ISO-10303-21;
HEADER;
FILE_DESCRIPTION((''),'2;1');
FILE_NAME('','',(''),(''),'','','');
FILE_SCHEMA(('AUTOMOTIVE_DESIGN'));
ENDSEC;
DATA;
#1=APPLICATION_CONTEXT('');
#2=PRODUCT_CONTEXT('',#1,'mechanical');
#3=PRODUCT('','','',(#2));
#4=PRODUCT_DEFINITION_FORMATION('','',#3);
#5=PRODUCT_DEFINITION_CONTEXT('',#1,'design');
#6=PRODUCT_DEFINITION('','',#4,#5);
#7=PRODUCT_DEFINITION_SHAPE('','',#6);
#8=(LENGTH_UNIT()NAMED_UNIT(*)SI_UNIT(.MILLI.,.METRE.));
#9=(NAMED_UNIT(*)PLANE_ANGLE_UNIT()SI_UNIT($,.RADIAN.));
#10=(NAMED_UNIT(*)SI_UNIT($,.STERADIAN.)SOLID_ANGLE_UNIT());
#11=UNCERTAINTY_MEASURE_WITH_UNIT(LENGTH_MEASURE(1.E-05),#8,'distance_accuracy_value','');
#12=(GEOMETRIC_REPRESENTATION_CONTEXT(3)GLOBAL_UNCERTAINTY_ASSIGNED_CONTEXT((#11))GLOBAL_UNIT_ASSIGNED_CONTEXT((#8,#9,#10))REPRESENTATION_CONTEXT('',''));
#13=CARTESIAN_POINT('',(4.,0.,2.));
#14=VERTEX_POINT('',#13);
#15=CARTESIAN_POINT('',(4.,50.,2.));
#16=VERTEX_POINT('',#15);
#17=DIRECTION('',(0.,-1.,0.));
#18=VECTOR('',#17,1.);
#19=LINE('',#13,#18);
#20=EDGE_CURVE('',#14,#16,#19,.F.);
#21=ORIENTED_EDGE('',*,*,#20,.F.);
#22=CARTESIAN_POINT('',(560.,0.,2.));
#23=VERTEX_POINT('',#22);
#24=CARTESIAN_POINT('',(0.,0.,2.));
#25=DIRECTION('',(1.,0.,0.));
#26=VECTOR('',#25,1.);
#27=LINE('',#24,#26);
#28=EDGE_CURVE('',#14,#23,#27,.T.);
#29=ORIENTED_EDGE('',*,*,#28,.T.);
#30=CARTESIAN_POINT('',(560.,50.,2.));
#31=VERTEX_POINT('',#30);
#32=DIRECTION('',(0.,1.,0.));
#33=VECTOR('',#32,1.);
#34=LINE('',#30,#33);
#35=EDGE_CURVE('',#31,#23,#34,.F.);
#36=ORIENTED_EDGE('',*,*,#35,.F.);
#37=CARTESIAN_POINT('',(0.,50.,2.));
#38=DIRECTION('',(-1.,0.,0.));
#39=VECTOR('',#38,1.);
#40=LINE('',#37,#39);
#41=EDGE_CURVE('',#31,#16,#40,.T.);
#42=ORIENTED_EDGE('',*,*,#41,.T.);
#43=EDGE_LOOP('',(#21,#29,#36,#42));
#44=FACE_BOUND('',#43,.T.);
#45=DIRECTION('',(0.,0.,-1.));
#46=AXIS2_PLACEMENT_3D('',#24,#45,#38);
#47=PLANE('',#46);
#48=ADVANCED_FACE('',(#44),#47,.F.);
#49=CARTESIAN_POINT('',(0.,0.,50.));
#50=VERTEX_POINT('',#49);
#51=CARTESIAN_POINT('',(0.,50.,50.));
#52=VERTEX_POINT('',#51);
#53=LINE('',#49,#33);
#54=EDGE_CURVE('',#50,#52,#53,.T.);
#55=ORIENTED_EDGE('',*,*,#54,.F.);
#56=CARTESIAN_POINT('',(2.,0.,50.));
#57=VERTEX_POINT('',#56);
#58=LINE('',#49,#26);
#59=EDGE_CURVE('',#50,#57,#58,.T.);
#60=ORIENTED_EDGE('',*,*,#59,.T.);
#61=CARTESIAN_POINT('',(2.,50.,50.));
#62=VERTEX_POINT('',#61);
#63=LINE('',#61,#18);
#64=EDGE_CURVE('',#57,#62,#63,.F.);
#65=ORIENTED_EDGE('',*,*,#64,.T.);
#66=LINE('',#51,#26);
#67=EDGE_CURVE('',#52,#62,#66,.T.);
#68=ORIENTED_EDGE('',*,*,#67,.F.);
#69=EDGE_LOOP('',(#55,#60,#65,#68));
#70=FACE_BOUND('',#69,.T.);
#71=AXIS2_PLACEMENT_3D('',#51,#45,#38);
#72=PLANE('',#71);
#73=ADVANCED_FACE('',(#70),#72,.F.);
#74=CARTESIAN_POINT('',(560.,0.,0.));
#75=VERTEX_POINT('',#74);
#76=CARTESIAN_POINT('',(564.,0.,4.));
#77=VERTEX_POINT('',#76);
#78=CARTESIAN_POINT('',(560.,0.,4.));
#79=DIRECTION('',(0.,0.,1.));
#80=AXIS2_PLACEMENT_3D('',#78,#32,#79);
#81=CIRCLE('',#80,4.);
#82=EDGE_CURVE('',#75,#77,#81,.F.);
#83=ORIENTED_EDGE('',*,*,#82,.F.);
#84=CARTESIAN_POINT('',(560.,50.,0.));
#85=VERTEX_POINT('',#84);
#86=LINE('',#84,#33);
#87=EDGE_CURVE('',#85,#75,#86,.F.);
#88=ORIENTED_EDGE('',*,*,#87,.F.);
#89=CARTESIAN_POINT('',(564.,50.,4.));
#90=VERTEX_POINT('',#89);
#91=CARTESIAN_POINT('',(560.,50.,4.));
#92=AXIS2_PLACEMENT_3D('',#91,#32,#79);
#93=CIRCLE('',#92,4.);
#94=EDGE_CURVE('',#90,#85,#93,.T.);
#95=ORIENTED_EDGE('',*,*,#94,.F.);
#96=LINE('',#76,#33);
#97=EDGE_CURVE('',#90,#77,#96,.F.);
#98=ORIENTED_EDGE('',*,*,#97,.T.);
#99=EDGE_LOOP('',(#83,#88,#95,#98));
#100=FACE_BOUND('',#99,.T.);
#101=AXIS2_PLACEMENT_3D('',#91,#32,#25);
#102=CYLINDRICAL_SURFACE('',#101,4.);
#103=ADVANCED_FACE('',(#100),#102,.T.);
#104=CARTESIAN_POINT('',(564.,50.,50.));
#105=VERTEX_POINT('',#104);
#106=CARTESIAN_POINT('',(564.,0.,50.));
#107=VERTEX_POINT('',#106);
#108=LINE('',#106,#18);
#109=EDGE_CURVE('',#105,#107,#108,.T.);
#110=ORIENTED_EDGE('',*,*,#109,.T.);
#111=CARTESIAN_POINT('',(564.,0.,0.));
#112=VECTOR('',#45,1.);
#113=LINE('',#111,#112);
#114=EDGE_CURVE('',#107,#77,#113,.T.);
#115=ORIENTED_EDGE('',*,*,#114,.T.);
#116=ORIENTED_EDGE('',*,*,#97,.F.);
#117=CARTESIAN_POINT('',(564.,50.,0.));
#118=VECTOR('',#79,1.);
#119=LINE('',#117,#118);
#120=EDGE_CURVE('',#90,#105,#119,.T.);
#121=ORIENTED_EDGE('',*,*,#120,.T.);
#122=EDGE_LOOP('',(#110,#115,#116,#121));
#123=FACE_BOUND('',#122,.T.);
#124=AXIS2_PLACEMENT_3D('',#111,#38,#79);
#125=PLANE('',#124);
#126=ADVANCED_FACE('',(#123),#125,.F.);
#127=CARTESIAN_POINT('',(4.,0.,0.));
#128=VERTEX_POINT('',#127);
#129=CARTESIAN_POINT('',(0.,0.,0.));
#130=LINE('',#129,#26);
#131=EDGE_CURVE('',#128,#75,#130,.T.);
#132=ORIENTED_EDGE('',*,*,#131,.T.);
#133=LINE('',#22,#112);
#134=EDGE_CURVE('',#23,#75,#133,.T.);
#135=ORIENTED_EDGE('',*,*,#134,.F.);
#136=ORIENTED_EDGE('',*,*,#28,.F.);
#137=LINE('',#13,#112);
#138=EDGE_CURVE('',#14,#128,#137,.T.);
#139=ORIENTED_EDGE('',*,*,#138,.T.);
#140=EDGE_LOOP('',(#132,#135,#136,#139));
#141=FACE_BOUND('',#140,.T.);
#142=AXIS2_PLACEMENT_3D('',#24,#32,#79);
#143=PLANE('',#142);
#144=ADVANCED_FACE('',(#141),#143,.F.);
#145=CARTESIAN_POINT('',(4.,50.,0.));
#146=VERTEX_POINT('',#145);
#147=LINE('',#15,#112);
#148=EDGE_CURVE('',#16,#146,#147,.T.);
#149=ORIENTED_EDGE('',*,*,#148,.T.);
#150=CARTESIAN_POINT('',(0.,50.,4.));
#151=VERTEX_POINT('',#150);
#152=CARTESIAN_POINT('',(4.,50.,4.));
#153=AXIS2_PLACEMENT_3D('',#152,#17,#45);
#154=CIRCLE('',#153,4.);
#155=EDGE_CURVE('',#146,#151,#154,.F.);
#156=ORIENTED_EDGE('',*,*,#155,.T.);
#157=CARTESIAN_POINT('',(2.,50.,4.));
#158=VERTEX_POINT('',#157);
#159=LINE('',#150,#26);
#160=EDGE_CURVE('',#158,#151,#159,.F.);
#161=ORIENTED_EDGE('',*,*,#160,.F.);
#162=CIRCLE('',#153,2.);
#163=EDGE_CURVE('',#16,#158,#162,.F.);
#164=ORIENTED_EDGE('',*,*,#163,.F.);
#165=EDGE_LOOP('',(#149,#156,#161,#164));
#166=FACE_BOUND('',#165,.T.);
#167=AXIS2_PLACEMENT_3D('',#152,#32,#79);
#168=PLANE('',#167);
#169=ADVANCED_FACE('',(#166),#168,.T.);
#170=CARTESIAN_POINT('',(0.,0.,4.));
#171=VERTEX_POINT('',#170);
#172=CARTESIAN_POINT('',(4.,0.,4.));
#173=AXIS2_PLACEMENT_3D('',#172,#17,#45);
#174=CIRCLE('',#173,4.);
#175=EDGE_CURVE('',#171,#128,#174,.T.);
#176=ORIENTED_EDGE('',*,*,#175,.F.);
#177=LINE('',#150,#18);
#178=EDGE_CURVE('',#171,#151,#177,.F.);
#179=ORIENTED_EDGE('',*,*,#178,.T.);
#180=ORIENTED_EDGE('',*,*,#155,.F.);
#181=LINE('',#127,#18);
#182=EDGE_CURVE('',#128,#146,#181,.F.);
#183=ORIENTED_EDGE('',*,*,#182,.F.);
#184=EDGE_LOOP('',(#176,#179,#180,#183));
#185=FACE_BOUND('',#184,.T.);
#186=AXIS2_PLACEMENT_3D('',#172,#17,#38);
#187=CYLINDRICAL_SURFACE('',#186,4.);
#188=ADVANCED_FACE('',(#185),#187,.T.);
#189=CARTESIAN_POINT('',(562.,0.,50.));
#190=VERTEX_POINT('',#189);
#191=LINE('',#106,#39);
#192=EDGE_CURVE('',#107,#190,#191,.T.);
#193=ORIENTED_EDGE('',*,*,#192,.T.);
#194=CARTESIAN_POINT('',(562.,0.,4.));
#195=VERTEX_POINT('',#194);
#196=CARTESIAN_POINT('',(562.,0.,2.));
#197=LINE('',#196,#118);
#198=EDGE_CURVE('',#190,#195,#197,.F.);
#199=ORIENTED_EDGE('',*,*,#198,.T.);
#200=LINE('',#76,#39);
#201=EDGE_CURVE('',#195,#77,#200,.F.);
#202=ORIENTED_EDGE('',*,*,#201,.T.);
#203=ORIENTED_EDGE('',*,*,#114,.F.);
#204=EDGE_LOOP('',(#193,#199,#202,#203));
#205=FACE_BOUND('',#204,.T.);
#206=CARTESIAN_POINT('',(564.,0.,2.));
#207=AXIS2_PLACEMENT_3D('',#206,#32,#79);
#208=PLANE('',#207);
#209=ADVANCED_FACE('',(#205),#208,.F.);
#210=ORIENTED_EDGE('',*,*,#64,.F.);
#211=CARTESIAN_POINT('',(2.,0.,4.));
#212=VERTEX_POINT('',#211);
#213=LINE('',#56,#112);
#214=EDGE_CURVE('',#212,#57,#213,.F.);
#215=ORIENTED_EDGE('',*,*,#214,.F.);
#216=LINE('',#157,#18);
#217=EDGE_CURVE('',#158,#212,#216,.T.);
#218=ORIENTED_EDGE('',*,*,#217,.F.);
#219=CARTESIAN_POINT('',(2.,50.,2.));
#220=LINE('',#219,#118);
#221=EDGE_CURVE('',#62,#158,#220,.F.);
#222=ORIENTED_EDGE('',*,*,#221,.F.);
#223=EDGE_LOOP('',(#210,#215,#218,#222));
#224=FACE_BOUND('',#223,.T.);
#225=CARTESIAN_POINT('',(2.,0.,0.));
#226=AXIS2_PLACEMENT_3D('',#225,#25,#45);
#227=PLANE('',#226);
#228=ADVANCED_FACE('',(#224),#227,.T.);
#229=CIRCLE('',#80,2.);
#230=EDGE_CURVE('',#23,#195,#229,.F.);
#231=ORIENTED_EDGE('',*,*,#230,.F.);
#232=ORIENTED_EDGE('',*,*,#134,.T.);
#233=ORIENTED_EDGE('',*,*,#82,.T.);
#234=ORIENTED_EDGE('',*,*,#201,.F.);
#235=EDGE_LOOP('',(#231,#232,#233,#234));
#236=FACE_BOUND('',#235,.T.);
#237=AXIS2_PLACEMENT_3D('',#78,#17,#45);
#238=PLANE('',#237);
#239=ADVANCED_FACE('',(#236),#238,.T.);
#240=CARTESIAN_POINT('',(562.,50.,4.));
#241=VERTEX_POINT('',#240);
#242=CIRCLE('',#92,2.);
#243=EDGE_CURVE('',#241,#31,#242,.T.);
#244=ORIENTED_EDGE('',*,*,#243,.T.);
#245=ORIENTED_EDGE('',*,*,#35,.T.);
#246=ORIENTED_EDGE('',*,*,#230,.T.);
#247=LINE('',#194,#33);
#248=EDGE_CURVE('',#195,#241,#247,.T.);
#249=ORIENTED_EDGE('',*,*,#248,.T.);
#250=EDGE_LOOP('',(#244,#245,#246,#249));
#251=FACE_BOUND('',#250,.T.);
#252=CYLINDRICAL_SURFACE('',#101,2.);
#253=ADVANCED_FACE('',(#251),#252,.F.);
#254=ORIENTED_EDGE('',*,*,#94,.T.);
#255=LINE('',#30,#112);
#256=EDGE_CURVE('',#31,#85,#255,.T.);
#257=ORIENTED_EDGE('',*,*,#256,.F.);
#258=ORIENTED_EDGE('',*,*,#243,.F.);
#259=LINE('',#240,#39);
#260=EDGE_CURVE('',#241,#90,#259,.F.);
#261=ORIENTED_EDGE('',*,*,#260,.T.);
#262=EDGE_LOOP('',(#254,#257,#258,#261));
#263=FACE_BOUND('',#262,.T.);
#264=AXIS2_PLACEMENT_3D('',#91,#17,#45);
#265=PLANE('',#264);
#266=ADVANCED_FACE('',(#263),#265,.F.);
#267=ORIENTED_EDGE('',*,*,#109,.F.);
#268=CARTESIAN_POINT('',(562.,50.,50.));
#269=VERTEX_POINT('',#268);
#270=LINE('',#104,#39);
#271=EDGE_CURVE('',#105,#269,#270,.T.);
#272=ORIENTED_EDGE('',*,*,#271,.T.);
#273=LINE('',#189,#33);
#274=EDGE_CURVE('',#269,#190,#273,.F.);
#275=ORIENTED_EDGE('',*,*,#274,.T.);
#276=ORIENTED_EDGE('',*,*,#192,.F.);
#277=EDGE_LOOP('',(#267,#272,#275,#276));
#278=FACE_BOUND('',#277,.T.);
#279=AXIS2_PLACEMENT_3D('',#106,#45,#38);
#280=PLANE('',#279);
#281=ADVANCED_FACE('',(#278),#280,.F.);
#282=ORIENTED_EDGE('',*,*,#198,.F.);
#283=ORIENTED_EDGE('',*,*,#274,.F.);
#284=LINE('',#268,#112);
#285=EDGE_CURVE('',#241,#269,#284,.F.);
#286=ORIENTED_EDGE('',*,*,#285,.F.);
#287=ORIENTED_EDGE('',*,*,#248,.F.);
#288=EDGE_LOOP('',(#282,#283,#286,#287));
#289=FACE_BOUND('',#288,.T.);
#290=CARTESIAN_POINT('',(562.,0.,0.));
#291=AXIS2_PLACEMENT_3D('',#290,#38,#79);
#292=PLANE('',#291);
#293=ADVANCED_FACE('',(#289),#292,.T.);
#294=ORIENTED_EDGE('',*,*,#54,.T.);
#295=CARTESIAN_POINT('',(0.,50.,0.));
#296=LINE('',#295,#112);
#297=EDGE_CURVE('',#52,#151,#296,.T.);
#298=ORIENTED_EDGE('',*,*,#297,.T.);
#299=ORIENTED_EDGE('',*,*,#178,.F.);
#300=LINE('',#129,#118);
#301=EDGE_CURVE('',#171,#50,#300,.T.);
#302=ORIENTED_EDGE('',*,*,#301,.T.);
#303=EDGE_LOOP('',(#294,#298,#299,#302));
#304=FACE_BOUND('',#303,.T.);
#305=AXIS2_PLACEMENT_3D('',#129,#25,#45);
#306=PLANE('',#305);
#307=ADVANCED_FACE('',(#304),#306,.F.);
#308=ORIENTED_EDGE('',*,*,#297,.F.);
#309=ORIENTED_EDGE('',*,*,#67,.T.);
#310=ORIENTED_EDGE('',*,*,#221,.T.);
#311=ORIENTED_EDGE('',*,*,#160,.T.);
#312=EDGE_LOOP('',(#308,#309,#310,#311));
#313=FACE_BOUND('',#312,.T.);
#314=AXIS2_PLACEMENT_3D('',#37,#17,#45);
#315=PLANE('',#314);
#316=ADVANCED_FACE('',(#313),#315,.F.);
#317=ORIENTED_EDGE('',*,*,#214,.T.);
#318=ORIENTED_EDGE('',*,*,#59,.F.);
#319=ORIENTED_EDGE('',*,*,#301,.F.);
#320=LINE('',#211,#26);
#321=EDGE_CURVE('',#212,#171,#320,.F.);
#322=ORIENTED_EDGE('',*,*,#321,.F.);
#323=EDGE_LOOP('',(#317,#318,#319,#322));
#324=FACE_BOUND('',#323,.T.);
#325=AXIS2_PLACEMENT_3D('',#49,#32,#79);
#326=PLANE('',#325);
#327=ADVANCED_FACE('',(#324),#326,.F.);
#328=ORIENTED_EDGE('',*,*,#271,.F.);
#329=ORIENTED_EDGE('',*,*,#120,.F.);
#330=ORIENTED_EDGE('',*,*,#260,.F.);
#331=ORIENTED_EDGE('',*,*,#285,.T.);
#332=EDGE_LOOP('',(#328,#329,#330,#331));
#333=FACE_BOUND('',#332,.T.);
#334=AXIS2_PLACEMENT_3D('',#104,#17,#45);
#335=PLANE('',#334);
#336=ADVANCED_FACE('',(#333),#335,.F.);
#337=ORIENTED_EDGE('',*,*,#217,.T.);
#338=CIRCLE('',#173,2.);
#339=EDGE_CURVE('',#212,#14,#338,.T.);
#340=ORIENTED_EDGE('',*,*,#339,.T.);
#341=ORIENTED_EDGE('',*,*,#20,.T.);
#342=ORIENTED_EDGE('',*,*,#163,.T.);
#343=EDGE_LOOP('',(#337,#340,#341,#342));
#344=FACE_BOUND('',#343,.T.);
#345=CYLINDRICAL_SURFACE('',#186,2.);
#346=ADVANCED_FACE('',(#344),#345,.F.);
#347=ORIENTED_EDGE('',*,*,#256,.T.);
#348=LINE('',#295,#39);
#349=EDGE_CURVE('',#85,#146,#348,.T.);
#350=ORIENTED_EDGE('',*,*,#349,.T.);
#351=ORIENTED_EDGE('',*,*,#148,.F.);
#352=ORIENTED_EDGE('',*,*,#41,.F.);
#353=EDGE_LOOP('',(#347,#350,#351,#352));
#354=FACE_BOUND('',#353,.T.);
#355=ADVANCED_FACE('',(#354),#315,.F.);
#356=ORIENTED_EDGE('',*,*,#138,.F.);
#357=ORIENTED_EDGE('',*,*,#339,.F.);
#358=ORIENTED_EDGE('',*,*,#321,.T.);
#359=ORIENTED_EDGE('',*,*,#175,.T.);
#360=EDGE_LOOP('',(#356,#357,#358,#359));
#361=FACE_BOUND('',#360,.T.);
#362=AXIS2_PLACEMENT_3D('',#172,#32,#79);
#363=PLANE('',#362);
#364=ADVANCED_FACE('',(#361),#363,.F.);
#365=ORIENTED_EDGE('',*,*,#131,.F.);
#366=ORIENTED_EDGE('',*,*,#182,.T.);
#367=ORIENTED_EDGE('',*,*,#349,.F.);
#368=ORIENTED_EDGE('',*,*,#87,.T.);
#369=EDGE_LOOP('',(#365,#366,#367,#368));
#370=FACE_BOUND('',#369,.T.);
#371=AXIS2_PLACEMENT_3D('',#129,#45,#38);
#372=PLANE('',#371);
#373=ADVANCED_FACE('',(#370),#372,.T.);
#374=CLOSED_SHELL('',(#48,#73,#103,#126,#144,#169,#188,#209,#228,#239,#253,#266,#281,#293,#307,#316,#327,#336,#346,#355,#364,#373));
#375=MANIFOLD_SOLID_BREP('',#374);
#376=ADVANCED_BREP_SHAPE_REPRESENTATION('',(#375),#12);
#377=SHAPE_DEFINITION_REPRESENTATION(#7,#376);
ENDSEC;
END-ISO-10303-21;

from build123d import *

# Parameters (mm, degrees)
SKETCH_1_W                       = 564
SKETCH_1_H                       = 50
SM_BASE_FLANGE_1_DEPTH           = 2
SM_EDGE_FLANGE_1_STRIP_W         = 12
SM_EDGE_FLANGE_1_STRIP_H         = 2
SM_EDGE_FLANGE_1_STRIP_CUT_DEPTH = 50
SM_EDGE_FLANGE_1_DEPTH           = 50
SM_EDGE_FLANGE_2_STRIP_W         = 12
SM_EDGE_FLANGE_2_STRIP_H         = 2
SM_EDGE_FLANGE_2_STRIP_CUT_DEPTH = 50
SM_EDGE_FLANGE_2_DEPTH           = 50


# Sheet-metal steps are written as plain solids
with BuildPart() as part:
    # Sketch 1 → Базовая кромка1 (new body)
    with BuildSketch(Plane.XY):
        with Locations((282, 25)):
            Rectangle(SKETCH_1_W, SKETCH_1_H)
    extrude(amount=SM_BASE_FLANGE_1_DEPTH)

    # Ребро-кромка1 strip (across the edge) → Ребро-кромка1 strip cut (cut)
    with BuildSketch(Plane(origin=(0, 50, 2), x_dir=(1, 0, 0), z_dir=(0, -1, 0))):
        with Locations((-2, -1)):
            Rectangle(SM_EDGE_FLANGE_1_STRIP_W, SM_EDGE_FLANGE_1_STRIP_H)
    extrude(amount=SM_EDGE_FLANGE_1_STRIP_CUT_DEPTH, mode=Mode.SUBTRACT)

    # Ребро-кромка1 section (across the edge) → Ребро-кромка1 (add)
    with BuildSketch(Plane(origin=(0, 50, 2), x_dir=(1, 0, 0), z_dir=(0, -1, 0))):
        with BuildLine():
            Line((0, 2), (0, 48))
            Line((0, 48), (2, 48))
            Line((2, 48), (2, 2))
            ThreePointArc((2, 2), (2.585786438, 0.585786438), (4, 0))
            Line((4, 0), (4, -2))
            ThreePointArc((4, -2), (1.171572875, -0.828427125), (0, 2))
        make_face()
    extrude(amount=SM_EDGE_FLANGE_1_DEPTH)

    # Ребро-кромка2 strip (across the edge) → Ребро-кромка2 strip cut (cut)
    with BuildSketch(Plane(origin=(564, 0, 2), x_dir=(-1, 0, 0), z_dir=(0, 1, 0))):
        with Locations((-2, -1)):
            Rectangle(SM_EDGE_FLANGE_2_STRIP_W, SM_EDGE_FLANGE_2_STRIP_H)
    extrude(amount=SM_EDGE_FLANGE_2_STRIP_CUT_DEPTH, mode=Mode.SUBTRACT)

    # Ребро-кромка2 section (across the edge) → Ребро-кромка2 (add)
    with BuildSketch(Plane(origin=(564, 0, 2), x_dir=(-1, 0, 0), z_dir=(0, 1, 0))):
        with BuildLine():
            Line((0, 2), (0, 48))
            Line((0, 48), (2, 48))
            Line((2, 48), (2, 2))
            ThreePointArc((2, 2), (2.585786438, 0.585786438), (4, 0))
            Line((4, 0), (4, -2))
            ThreePointArc((4, -2), (1.171572875, -0.828427125), (0, 2))
        make_face()
    extrude(amount=SM_EDGE_FLANGE_2_DEPTH)


solid = part.part
